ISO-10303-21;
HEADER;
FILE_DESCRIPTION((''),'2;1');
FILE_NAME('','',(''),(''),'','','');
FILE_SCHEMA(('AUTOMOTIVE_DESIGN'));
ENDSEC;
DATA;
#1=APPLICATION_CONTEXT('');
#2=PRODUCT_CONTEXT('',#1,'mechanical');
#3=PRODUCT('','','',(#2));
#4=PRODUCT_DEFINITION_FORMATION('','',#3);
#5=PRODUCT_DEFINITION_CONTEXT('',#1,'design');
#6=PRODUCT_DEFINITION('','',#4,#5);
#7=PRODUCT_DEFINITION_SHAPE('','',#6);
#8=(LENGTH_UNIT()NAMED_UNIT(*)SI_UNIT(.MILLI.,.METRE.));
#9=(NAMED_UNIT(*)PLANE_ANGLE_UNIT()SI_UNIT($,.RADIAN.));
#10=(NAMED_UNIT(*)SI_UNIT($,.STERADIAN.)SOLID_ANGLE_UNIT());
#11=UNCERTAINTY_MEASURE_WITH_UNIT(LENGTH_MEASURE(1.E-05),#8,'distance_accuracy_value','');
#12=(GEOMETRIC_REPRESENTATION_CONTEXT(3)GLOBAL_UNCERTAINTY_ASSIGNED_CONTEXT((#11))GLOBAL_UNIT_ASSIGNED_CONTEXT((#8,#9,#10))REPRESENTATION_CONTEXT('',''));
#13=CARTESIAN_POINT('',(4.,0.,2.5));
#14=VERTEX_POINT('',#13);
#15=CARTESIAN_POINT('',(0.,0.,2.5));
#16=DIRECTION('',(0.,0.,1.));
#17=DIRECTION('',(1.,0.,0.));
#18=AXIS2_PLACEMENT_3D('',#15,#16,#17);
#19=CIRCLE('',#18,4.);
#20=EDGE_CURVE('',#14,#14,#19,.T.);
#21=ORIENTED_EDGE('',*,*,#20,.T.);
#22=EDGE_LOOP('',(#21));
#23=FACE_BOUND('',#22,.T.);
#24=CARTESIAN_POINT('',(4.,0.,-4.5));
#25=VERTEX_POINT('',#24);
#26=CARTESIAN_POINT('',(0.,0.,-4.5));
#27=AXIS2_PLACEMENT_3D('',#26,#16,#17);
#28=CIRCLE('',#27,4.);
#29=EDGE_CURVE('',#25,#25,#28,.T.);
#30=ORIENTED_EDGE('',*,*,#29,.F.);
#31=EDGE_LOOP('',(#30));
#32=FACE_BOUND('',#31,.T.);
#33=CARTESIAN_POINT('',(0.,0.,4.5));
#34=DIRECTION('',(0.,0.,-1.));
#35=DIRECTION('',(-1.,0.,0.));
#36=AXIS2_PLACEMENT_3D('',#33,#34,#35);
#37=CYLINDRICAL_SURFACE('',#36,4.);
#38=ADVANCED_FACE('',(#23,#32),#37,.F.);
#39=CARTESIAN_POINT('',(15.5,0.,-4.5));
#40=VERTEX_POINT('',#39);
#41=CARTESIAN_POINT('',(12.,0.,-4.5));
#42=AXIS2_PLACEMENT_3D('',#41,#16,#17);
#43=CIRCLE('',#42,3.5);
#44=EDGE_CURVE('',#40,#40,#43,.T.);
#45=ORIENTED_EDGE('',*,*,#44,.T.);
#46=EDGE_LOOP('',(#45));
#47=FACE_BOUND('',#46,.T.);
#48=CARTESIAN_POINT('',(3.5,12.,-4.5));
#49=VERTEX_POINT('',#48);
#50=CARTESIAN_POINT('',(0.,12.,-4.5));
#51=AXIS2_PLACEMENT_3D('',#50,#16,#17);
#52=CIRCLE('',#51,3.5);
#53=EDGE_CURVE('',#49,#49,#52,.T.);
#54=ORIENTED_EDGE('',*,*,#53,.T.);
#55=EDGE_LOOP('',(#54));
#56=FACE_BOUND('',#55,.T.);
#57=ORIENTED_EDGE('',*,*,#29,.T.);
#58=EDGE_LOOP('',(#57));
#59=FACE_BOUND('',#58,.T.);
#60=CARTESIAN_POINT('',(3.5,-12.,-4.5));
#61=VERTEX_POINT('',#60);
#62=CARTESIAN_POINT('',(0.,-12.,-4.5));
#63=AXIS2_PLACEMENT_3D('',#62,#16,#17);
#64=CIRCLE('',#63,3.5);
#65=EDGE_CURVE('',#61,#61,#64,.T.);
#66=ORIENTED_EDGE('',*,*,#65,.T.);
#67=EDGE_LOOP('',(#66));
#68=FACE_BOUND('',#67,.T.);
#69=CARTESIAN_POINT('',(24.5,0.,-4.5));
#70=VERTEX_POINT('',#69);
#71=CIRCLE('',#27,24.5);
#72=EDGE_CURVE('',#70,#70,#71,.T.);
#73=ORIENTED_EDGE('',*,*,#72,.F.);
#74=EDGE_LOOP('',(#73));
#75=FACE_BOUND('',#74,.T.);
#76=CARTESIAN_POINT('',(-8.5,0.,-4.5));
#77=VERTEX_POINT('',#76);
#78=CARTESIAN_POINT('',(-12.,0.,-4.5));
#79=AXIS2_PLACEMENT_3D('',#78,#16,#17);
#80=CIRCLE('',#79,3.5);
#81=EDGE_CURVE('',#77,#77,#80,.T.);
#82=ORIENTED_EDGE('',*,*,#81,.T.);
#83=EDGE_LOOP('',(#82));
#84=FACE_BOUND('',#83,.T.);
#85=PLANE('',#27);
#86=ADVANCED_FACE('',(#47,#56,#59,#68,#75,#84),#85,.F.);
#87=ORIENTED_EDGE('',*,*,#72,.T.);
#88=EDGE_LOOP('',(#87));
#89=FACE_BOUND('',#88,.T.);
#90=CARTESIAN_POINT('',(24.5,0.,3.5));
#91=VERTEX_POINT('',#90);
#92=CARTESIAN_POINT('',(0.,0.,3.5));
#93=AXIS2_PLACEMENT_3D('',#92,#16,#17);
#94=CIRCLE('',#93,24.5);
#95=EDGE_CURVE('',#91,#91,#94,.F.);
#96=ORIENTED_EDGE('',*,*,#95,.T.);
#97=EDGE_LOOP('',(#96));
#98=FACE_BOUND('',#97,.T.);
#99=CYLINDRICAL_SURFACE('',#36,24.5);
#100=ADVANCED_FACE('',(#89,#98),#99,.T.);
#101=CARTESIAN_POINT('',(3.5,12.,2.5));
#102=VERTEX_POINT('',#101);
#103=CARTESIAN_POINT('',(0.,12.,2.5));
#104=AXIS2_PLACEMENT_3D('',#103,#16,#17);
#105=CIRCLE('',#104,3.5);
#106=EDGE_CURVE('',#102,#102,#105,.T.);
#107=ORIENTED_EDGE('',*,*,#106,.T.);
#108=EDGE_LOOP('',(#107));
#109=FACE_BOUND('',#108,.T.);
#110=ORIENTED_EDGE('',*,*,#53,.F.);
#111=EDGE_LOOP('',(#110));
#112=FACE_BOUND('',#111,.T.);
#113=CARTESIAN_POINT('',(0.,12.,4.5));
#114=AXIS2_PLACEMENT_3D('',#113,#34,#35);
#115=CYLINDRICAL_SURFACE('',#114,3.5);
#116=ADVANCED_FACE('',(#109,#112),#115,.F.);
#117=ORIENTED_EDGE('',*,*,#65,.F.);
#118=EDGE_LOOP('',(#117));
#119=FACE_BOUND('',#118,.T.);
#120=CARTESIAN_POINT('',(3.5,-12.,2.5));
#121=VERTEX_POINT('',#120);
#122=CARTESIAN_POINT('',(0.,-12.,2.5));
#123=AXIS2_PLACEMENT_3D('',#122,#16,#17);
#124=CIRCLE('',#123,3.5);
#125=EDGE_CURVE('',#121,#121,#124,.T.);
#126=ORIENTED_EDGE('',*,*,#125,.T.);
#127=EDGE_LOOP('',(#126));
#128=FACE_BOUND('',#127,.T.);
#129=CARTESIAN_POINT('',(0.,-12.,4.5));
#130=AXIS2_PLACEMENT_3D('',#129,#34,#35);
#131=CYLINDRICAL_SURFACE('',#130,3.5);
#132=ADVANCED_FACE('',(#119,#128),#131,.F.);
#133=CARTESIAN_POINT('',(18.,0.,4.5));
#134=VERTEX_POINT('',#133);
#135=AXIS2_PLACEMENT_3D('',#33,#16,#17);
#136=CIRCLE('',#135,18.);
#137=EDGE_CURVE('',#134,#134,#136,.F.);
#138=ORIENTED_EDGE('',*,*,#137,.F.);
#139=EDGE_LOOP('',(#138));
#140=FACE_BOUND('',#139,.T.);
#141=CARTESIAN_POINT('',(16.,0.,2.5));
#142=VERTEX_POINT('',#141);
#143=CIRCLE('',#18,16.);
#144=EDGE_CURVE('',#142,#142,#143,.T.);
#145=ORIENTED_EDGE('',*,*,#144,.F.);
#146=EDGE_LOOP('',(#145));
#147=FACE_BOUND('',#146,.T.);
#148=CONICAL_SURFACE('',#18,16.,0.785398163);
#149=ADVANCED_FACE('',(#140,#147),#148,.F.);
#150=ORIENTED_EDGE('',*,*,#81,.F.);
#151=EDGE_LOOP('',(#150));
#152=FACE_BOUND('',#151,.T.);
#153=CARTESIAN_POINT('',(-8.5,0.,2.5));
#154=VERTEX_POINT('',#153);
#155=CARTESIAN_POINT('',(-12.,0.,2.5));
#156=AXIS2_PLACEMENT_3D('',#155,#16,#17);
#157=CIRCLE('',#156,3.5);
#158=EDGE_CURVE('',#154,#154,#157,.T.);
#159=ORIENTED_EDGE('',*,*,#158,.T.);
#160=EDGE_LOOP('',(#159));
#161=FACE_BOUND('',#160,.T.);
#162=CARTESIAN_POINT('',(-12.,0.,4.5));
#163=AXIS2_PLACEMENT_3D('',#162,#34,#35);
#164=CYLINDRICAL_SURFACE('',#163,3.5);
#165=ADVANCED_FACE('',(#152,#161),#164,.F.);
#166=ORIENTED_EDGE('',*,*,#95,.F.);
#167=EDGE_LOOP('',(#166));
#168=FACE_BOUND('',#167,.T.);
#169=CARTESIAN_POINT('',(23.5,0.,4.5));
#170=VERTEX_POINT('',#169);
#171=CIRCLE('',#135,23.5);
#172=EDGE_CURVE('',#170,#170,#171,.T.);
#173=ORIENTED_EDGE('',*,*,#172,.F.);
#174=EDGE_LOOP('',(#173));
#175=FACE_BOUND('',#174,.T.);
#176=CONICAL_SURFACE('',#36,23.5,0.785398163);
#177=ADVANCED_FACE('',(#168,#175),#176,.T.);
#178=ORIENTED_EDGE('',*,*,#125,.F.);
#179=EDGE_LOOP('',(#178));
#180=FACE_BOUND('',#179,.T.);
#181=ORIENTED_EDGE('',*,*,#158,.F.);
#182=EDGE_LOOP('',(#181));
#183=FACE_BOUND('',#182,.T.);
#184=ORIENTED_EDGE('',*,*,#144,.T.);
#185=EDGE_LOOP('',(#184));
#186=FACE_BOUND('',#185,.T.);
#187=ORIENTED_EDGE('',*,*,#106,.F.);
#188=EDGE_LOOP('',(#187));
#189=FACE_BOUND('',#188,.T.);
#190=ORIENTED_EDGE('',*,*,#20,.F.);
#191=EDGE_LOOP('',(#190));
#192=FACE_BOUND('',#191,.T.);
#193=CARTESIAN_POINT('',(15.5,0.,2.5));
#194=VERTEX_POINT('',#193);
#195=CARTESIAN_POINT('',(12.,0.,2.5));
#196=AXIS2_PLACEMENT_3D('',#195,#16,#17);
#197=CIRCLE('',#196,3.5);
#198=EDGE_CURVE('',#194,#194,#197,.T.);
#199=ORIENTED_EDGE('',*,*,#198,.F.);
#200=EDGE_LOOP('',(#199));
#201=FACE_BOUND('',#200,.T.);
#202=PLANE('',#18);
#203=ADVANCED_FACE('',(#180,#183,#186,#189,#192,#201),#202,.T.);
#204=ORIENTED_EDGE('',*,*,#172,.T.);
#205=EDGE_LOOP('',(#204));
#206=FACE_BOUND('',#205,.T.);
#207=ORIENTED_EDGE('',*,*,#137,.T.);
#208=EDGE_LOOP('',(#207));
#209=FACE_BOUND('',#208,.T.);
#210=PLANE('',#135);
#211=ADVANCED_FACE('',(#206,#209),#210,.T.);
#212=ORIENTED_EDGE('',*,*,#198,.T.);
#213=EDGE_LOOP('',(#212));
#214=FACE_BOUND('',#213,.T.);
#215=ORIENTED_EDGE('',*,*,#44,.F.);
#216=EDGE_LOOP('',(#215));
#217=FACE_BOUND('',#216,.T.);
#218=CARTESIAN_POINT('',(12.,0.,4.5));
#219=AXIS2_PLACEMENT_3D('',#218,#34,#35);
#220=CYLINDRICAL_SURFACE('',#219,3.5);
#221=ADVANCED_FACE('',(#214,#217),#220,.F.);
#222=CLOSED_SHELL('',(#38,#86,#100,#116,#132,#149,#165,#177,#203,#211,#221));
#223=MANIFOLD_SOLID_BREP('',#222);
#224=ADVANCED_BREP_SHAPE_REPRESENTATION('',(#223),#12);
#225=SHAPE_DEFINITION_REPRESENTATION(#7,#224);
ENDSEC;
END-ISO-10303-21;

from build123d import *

# Parameters (mm, degrees)
SKETCH1_R           = 24.5
SKETCH1_R_2         = 3.5
SKETCH1_R_3         = 4
BOSS_EXTRUDE1_DEPTH = 4.5
SKETCH2_R           = 16
CUT_EXTRUDE1_DEPTH  = 2
CHAMFER1_SIZE       = 2
CHAMFER2_SIZE       = 1


with BuildPart() as part:
    # Sketch1 → Boss-Extrude1 (new, symmetric)
    with BuildSketch(Plane.XY):
        Circle(SKETCH1_R)
        with Locations((0, 12)):
            Circle(SKETCH1_R_2, mode=Mode.SUBTRACT)
        with Locations((-12, 0)):
            Circle(SKETCH1_R_2, mode=Mode.SUBTRACT)
        with Locations((0, -12)):
            Circle(SKETCH1_R_2, mode=Mode.SUBTRACT)
        with Locations((12, 0)):
            Circle(SKETCH1_R_2, mode=Mode.SUBTRACT)
        Circle(SKETCH1_R_3, mode=Mode.SUBTRACT)
    extrude(amount=BOSS_EXTRUDE1_DEPTH, both=True)

    # Sketch2 → Cut-Extrude1 (cut)
    with BuildSketch(Plane.XY.offset(4.5)):
        Circle(SKETCH2_R)
    extrude(amount=-CUT_EXTRUDE1_DEPTH, mode=Mode.SUBTRACT)

    # Chamfer1
    chamfer1_edges = [part.edges().sort_by_distance(p)[0] for p in [
        (-16, 0, 4.5),
    ]]
    chamfer(chamfer1_edges, length=CHAMFER1_SIZE - 0.0001)  # a hair under: the kernel refuses the full size

    # Chamfer2
    chamfer2_edges = [part.edges().sort_by_distance(p)[0] for p in [
        (-24.5, 0, 4.5),
    ]]
    chamfer(chamfer2_edges, length=CHAMFER2_SIZE)


solid = part.part
